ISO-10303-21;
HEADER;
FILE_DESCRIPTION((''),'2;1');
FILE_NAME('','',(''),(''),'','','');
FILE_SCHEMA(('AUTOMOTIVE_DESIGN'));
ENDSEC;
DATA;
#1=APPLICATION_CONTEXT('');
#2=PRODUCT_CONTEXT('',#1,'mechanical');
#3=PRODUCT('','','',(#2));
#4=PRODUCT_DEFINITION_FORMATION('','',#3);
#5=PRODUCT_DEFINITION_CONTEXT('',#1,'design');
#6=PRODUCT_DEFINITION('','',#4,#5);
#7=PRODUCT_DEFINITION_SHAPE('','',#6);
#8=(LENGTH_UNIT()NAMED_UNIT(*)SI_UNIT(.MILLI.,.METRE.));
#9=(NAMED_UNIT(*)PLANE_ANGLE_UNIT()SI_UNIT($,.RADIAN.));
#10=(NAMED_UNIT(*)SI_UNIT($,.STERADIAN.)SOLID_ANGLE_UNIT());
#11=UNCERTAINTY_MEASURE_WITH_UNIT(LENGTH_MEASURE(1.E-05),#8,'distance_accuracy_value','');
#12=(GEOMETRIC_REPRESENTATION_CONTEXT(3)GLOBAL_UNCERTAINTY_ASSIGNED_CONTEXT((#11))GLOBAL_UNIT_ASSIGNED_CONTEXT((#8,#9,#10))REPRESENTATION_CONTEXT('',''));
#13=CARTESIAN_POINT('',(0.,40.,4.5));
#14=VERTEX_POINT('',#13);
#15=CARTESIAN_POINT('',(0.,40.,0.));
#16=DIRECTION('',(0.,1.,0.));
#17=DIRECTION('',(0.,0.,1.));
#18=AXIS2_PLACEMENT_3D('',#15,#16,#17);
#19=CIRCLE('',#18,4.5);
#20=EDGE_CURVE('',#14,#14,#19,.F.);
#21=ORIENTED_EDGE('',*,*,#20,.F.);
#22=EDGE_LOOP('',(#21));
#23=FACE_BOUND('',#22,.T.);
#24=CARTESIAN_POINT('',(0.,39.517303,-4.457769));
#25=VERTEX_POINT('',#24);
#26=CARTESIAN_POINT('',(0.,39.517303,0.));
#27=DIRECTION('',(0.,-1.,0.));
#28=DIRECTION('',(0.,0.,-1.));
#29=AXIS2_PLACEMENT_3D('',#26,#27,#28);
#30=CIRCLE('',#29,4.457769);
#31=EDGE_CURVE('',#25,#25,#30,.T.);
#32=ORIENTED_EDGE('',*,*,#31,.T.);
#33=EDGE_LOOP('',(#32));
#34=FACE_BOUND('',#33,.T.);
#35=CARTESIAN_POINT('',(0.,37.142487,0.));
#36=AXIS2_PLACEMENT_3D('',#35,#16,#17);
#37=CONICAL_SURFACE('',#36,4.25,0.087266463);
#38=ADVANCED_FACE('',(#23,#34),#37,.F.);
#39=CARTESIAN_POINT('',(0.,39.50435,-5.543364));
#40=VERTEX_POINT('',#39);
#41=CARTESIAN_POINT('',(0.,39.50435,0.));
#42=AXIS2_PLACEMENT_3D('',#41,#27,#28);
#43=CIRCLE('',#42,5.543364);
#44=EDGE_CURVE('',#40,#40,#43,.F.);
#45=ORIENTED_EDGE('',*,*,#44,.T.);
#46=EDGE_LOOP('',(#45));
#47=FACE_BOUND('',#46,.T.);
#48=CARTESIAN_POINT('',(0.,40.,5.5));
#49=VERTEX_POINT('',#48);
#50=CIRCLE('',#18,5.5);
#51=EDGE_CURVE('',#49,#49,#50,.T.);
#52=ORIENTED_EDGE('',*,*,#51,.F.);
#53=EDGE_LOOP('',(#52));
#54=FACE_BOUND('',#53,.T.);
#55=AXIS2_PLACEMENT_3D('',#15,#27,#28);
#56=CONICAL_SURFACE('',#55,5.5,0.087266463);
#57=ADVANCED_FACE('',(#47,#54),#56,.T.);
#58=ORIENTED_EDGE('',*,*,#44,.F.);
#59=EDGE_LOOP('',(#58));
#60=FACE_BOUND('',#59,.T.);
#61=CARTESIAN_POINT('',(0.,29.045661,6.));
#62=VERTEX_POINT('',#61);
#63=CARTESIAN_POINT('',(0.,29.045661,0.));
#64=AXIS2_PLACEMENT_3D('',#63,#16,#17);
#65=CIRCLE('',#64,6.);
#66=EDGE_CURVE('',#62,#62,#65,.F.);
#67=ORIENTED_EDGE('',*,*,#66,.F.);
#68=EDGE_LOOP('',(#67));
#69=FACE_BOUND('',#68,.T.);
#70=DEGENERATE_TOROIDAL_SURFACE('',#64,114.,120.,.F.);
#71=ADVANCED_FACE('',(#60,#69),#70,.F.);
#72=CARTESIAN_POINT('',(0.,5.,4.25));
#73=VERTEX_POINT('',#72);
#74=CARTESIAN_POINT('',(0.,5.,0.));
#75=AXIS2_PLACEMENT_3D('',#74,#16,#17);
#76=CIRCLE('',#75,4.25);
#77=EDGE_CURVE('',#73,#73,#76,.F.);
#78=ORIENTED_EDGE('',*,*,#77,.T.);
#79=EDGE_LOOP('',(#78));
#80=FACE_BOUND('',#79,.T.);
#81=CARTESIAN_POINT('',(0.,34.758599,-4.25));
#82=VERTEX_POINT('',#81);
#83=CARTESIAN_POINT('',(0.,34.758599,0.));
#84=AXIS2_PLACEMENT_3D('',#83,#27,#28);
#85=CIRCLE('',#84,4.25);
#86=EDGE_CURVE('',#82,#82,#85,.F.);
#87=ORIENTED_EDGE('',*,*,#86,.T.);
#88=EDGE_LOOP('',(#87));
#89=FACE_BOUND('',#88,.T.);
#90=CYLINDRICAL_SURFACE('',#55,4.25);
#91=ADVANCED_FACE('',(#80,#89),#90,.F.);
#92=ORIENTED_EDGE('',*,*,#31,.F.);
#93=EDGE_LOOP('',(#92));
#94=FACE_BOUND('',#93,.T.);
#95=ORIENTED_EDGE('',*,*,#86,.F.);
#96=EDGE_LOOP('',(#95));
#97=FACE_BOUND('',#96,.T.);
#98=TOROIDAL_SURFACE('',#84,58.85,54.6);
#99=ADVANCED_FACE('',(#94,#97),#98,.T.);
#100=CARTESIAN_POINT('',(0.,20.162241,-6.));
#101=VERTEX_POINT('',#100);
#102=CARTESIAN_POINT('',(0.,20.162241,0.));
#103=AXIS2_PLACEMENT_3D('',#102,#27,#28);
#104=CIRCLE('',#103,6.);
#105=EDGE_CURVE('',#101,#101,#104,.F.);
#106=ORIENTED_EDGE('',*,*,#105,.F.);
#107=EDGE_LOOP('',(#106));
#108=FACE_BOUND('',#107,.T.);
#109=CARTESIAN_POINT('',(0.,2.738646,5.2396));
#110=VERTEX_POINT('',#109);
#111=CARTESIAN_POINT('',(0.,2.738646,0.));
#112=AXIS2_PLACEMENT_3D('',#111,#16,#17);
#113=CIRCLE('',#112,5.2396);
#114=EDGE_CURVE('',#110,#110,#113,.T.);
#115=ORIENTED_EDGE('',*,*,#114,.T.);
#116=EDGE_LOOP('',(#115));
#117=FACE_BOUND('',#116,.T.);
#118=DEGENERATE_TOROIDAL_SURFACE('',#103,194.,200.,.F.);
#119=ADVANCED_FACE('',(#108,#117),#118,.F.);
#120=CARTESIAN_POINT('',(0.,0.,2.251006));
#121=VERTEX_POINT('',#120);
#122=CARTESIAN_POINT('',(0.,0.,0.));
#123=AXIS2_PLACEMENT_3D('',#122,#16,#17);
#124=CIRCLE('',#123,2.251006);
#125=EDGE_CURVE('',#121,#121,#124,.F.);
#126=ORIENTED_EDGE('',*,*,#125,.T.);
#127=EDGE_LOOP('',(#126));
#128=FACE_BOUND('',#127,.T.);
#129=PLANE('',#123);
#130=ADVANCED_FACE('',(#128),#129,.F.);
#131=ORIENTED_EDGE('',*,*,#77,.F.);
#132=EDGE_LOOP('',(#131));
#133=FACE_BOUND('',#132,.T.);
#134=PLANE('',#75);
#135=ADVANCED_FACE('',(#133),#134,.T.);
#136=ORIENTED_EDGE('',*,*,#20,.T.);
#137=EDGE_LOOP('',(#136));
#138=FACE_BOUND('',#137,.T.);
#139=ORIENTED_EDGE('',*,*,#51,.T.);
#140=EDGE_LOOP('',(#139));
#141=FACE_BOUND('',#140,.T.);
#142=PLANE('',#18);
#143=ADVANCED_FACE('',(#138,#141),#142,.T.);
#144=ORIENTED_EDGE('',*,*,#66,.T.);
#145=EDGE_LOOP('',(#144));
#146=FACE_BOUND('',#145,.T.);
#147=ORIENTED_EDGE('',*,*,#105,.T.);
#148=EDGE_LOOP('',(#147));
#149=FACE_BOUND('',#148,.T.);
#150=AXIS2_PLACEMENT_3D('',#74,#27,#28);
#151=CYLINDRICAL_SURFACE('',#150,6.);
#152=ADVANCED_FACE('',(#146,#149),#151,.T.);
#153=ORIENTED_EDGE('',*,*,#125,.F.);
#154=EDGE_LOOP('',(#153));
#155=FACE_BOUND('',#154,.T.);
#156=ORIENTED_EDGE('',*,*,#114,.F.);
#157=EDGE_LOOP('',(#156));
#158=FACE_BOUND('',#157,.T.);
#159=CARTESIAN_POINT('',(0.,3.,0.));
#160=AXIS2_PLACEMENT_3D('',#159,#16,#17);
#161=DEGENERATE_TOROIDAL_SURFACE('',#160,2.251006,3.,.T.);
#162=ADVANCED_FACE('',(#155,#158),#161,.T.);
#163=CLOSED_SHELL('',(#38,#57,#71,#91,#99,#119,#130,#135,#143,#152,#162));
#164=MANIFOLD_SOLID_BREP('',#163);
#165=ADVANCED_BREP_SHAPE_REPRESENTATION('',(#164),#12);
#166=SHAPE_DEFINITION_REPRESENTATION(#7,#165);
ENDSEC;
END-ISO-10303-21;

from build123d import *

# Parameters (mm, degrees)
SKETCH1_R           = 6
BOSS_EXTRUDE1_DEPTH = 5
SKETCH2_R           = 6
SKETCH2_R_2         = 4.25
BOSS_EXTRUDE2_DEPTH = 35
CHAMFER1_SIZE       = 1
CHAMFER1_SIZE2      = 11.430052303
FILLET1_R           = 200
CHAMFER2_SIZE       = 0.25
CHAMFER2_SIZE2      = 2.857513076
CHAMFER3_SIZE       = 0.5
CHAMFER3_SIZE2      = 5.715026151
FILLET3_R           = 120
FILLET4_R           = 3


with BuildPart() as part:
    # Sketch1 → Boss-Extrude1 (new body)
    with BuildSketch(Plane(origin=(0, 0, 0), x_dir=(1, 0, 0), z_dir=(0, 1, 0))):
        with Locations(Location((0, 0, 0), (0, 0, 270))):
            Circle(SKETCH1_R)
    extrude(amount=BOSS_EXTRUDE1_DEPTH)

    # Sketch2 → Boss-Extrude2 (add)
    with BuildSketch(Plane(origin=(0, 5, 0), x_dir=(1, 0, 0), z_dir=(0, 1, 0))):
        with Locations(Location((0, 0, 0), (0, 0, 270))):
            Circle(SKETCH2_R)
        with Locations(Location((0, 0, 0), (0, 0, 270))):
            Circle(SKETCH2_R_2, mode=Mode.SUBTRACT)
    extrude(amount=BOSS_EXTRUDE2_DEPTH)

    # Chamfer1
    chamfer1_edges = [part.edges().sort_by_distance(p)[0] for p in [
        (0, 0, -6),
    ]]
    chamfer1_side = [part.faces().sort_by_distance(p)[0] for p in [
        (0, 0, 0),
    ]]
    chamfer(chamfer1_edges, length=CHAMFER1_SIZE, length2=CHAMFER1_SIZE2, reference=chamfer1_side[0])

    # Fillet1
    # the kernel refuses this fillet: 200 mm, written as the material it takes off along each edge
    with BuildSketch(Plane(origin=(0, 11.430052303, 0), x_dir=(0, 0, 1), z_dir=(-1, 0, 0))) as fillet1_piece_1:
        with BuildLine():
            CenterArc((6 - FILLET1_R, FILLET1_R * 0.0436609429085), FILLET1_R, 355, 5)
            Line((6 - FILLET1_R * 0.00380530190825, -FILLET1_R * 0.0434947998391), (6, 0))
            Line((6, 0), (6, FILLET1_R * 0.0436609429085))
        make_face()
    revolve(axis=Axis((0, 11.430052303, 0), (0, 1, 0)), mode=Mode.SUBTRACT)

    # Chamfer2
    chamfer2_edges = [part.edges().sort_by_distance(p)[0] for p in [
        (0, 40, -4.25),
    ]]
    chamfer2_side = [part.faces().sort_by_distance(p)[0] for p in [
        (0, 40, -5.830294373),
    ]]
    chamfer(chamfer2_edges, length=CHAMFER2_SIZE, length2=CHAMFER2_SIZE2, reference=chamfer2_side[0])

    # Fillet2: read off the stored shape, not the designer's step
    # Fillet2 outline → Fillet2 (revolve, cut)
    with BuildSketch(Plane.XY):
        with BuildLine():
            Line((4.25, 39.517302996), (4.25, 34.758599442))
            ThreePointArc((4.25, 34.758599442), (4.301967102, 37.140217992), (4.457769484, 39.517302996))
            Line((4.457769484, 39.517302996), (4.25, 39.517302996))
        make_face()
    revolve(axis=Axis((0, 0, 0), (0, 1, 0)), mode=Mode.SUBTRACT)

    # Chamfer3
    chamfer3_edges = [part.edges().sort_by_distance(p)[0] for p in [
        (0, 40, -6),
    ]]
    chamfer3_side = [part.faces().sort_by_distance(p)[0] for p in [
        (0, 40, -4.669705627),
    ]]
    chamfer(chamfer3_edges, length=CHAMFER3_SIZE, length2=CHAMFER3_SIZE2, reference=chamfer3_side[0])

    # Fillet3
    # the kernel refuses this fillet: 120 mm, written as the material it takes off along each edge
    with BuildSketch(Plane(origin=(0, 34.284973849, 0), x_dir=(0, 0, 1), z_dir=(-1, 0, 0))) as fillet3_piece_1:
        with BuildLine():
            CenterArc((6 - FILLET3_R, -FILLET3_R * 0.0436609429085), FILLET3_R, 0, 5)
            Line((6, -FILLET3_R * 0.0436609429085), (6, 0))
            Line((6, 0), (6 - FILLET3_R * 0.00380530190825, FILLET3_R * 0.0434947998391))
        make_face()
    revolve(axis=Axis((0, 34.284973849, 0), (0, 1, 0)), mode=Mode.SUBTRACT)

    # Fillet4
    # the kernel refuses this fillet: 3 mm, written as the material it takes off along each edge
    with BuildSketch(Plane(origin=(0, 0, 0), x_dir=(0, 0, 1), z_dir=(-1, 0, 0))) as fillet4_piece_1:
        with BuildLine():
            CenterArc((2.251015813, 3), FILLET4_R, 270, 84.857339632)
            Line((2.251015813, 0), (2.251015813, -0.06))
            Line((2.251015813, -0.06), (5, -0.06))
            Line((5, -0.06), (5.059771682, -0.005229345))
            Line((5.059771682, -0.005229345), (5.298698094, 2.725714182))
            Line((5.298698094, 2.725714182), (5.238939618, 2.731092335))
        make_face()
    revolve(axis=Axis((0, 0, 0), (0, 1, 0)), mode=Mode.SUBTRACT)


solid = part.part
